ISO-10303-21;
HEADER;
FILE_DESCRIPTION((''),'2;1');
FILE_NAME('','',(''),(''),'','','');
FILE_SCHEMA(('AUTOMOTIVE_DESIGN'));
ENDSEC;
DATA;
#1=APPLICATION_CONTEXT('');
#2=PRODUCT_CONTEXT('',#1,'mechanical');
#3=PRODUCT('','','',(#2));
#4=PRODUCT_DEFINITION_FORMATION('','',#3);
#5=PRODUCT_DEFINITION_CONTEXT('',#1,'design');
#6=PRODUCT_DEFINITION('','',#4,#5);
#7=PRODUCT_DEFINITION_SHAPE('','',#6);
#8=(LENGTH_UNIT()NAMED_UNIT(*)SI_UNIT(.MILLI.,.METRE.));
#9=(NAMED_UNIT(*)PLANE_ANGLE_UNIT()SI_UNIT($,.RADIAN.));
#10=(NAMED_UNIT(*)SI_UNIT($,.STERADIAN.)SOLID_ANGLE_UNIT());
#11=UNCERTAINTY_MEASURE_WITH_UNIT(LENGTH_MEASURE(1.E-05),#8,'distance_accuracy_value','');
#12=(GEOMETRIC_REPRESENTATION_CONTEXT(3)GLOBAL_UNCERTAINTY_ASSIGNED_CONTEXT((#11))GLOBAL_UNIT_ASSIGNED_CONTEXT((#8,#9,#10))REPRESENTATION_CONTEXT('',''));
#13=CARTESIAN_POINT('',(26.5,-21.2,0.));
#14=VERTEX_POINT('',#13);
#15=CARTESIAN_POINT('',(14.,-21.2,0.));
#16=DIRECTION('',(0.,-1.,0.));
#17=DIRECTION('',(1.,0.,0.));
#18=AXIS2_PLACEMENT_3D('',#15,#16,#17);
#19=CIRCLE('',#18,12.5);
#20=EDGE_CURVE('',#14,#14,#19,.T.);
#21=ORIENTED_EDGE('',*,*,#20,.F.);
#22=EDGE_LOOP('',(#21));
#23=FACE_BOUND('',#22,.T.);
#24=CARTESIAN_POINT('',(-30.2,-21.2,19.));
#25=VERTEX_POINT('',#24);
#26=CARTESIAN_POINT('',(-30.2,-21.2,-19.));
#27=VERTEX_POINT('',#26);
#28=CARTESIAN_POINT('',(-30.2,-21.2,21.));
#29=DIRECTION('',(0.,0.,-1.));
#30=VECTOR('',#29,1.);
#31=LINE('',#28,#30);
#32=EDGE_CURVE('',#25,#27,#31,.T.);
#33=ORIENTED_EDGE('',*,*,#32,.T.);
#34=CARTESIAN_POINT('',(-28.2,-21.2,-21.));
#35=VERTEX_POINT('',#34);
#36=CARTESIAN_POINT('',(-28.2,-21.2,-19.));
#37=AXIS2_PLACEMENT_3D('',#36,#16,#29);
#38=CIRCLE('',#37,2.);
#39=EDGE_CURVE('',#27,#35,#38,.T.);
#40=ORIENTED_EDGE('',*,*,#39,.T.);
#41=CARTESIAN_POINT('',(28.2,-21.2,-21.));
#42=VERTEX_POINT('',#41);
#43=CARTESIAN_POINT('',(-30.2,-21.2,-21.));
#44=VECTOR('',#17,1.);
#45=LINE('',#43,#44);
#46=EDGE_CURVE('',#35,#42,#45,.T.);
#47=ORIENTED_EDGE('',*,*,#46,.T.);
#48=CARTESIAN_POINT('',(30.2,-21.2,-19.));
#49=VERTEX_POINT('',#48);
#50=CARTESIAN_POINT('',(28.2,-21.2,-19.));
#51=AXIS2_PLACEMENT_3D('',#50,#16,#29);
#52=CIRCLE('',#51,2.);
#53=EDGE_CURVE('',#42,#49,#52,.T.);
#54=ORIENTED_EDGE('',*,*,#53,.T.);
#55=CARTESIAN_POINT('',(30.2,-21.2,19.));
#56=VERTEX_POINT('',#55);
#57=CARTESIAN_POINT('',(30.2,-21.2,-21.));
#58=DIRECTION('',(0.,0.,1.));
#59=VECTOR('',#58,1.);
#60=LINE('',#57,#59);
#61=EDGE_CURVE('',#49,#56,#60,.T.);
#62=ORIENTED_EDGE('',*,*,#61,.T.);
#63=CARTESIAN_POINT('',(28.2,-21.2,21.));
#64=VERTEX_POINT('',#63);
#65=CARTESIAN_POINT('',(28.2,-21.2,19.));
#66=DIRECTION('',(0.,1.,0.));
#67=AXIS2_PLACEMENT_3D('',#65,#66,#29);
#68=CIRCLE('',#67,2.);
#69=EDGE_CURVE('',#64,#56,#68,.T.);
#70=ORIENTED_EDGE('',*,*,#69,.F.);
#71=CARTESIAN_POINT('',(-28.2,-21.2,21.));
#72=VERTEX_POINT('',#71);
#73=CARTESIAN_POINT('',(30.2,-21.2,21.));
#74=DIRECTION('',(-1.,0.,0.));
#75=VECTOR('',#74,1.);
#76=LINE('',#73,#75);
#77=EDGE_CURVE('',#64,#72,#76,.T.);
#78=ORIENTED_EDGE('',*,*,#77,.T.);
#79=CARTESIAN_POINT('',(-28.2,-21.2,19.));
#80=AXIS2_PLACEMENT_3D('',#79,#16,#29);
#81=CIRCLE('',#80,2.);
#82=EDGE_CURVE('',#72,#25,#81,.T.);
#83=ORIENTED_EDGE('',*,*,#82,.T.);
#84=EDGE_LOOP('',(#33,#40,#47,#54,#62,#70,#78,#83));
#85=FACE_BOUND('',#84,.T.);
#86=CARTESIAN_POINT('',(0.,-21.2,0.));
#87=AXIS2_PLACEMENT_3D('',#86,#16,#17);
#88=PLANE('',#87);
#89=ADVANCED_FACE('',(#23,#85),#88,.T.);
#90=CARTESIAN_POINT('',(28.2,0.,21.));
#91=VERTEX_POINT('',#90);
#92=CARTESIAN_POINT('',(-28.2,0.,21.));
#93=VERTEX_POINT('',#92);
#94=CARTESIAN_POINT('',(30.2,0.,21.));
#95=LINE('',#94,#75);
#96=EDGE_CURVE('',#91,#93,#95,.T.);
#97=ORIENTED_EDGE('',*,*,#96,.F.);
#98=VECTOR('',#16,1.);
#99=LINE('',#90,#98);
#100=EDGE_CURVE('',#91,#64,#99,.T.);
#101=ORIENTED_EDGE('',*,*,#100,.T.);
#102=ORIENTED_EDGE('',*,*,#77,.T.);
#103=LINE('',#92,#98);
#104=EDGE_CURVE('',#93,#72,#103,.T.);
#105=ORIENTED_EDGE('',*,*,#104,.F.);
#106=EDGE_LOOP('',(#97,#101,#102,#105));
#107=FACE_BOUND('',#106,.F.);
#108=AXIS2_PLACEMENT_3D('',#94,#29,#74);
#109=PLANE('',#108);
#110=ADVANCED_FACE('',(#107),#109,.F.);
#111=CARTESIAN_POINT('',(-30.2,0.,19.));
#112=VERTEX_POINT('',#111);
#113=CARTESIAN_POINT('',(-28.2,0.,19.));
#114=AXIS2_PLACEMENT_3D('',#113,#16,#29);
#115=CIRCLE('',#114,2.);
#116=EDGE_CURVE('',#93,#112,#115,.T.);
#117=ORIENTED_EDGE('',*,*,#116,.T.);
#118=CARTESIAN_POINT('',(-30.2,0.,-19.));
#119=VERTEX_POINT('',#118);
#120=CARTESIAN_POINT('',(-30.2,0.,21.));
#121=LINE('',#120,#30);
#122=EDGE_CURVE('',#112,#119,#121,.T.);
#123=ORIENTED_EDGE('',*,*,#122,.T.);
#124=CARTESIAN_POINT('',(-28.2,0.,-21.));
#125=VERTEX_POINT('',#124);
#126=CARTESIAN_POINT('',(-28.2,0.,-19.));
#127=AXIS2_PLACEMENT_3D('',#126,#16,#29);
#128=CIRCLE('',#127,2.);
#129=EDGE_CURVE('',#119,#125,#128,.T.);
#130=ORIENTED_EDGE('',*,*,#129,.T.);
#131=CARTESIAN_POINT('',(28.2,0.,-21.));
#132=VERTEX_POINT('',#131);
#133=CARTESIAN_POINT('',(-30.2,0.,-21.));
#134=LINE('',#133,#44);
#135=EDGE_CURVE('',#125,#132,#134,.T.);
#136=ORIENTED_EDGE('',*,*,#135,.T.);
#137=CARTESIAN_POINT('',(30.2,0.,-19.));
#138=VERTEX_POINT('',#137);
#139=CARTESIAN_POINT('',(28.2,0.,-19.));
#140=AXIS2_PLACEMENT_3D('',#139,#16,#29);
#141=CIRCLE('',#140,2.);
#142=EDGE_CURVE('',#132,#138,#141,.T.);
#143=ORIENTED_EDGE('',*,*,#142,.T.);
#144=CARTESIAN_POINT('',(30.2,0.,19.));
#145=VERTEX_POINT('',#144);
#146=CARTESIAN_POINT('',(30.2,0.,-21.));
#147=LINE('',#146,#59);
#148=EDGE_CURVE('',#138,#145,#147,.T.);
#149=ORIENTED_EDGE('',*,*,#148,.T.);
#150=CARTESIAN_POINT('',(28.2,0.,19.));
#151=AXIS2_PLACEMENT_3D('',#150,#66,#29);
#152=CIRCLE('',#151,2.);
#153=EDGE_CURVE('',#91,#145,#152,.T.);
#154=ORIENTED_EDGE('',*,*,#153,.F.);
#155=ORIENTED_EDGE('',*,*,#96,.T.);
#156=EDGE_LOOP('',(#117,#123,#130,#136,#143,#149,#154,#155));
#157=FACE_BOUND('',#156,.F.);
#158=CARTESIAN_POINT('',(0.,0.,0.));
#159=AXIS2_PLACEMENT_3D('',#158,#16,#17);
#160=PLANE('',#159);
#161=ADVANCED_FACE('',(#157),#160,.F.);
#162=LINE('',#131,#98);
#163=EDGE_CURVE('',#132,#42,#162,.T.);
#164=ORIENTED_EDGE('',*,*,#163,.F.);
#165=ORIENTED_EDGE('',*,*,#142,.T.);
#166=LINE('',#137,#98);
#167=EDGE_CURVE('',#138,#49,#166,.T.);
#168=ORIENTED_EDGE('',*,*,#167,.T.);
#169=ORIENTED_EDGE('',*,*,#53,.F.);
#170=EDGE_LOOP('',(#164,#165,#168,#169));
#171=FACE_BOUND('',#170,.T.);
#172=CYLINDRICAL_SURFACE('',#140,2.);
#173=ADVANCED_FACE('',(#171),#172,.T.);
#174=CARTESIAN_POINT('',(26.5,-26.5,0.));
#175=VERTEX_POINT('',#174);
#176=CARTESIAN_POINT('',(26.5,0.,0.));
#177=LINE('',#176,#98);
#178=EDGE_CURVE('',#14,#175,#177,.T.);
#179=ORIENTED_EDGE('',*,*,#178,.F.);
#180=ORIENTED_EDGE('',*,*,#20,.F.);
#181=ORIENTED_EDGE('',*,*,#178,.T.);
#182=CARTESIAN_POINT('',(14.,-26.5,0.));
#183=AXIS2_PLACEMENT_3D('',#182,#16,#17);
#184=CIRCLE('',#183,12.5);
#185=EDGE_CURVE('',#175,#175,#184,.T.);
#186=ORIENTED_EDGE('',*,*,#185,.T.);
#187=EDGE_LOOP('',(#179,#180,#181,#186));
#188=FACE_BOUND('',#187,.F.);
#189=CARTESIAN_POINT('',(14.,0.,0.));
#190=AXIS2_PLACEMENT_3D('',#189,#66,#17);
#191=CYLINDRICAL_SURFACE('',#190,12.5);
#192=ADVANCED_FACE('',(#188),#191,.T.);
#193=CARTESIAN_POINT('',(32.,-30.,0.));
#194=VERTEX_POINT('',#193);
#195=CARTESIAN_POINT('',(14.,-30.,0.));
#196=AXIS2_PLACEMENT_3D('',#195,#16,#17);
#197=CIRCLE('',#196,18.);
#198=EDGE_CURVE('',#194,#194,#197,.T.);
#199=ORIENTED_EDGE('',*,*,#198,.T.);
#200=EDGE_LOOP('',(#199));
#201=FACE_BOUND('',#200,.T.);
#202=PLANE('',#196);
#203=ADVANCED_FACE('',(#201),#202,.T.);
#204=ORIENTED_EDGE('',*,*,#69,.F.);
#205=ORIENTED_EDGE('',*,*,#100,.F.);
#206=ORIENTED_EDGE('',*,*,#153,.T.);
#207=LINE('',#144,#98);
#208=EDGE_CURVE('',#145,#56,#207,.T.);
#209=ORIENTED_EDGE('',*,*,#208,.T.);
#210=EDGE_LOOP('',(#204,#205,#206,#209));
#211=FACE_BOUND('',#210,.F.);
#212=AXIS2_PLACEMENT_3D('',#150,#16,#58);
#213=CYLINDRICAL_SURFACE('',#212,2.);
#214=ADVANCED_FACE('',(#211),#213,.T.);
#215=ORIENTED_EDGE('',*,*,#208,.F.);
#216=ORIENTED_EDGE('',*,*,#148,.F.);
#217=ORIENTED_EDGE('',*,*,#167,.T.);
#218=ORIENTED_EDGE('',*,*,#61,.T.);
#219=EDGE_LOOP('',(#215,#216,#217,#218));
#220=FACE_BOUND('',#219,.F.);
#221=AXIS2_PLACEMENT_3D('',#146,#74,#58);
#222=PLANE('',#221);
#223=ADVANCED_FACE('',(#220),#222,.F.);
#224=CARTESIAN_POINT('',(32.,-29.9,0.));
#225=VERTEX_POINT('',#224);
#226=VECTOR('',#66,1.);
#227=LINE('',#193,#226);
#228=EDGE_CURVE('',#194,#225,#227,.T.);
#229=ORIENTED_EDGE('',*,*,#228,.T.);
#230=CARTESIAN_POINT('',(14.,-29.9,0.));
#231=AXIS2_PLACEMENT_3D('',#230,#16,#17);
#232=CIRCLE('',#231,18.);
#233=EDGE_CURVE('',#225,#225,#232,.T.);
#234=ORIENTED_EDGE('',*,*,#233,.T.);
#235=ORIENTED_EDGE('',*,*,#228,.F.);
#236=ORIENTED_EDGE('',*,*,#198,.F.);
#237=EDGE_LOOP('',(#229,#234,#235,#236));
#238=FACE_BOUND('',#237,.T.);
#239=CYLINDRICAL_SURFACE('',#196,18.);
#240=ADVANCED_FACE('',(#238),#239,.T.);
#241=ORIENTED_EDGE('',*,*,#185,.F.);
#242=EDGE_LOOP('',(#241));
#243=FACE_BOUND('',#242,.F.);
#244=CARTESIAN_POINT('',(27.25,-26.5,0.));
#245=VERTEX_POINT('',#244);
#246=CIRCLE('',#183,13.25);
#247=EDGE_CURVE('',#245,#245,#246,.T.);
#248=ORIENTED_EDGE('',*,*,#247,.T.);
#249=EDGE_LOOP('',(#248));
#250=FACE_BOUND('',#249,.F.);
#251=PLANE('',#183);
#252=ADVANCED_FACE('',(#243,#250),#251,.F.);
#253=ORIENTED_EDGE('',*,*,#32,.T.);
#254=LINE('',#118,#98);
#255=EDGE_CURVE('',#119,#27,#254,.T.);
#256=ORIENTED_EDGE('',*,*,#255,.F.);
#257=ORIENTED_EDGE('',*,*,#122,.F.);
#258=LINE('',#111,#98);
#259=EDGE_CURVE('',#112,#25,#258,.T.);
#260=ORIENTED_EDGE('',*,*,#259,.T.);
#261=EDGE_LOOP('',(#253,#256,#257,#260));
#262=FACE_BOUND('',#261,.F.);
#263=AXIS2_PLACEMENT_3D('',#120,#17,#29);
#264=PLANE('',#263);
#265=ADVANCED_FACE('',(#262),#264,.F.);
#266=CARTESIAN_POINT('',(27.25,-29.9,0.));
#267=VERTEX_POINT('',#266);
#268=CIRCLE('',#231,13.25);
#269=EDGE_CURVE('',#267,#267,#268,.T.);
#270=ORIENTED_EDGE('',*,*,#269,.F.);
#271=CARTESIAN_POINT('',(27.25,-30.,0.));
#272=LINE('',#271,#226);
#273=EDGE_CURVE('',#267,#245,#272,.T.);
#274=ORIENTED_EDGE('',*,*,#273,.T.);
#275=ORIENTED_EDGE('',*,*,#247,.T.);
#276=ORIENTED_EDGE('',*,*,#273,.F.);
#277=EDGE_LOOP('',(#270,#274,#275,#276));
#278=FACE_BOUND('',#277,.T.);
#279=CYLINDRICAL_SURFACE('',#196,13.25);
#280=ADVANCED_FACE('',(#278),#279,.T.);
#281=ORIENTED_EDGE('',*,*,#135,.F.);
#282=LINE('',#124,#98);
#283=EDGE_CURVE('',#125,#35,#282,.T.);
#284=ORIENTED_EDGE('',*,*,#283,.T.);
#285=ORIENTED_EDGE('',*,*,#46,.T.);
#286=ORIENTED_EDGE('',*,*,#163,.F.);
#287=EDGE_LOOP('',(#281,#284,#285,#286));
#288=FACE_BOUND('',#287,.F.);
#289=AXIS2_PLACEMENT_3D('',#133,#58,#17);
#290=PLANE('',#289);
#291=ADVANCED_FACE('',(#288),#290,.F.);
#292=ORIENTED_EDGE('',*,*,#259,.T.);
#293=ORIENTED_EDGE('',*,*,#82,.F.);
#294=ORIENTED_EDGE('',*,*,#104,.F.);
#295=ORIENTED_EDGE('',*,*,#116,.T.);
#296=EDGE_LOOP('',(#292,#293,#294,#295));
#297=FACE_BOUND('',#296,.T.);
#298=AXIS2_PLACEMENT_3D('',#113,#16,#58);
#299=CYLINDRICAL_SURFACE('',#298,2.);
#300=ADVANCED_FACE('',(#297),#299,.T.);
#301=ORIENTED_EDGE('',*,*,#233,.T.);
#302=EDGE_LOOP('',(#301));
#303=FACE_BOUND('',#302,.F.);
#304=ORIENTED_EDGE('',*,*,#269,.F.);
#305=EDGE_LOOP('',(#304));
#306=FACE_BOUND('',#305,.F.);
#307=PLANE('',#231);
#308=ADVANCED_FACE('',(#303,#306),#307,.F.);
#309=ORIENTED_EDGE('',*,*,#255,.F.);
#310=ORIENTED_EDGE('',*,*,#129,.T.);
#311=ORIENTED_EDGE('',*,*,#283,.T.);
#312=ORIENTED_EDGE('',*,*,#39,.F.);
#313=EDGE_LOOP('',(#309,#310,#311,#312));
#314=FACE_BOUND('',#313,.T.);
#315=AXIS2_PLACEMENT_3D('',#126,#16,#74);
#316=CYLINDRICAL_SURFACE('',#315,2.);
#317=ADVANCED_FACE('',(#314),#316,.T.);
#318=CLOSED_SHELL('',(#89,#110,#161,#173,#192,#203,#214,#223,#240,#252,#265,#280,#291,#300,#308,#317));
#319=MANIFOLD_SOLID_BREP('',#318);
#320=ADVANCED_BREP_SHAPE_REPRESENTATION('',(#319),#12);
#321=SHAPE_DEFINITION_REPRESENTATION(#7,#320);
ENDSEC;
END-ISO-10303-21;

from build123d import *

# Parameters (mm, degrees)
F0_R      = 12.5
F1_DEPTH  = 30
F2_DEPTH  = 21.2
F3_R      = 2
F4_R      = 2
F5_R      = 2
F6_R      = 2
F7_R      = 13.25
F7_R_2    = 12.5
F8_DEPTH  = 3.5
F7_R_3    = 18
F7_R_4    = 17.5
F10_DEPTH = 0.1


# Not quite as in the source:
# - the program builds the solid bodies; features that only make, move or delete a surface that nothing else refers to are left out


with BuildPart() as f1:
    # F0 (on Front) → F1 (new body)
    with BuildSketch(Plane.XZ):
        with Locations((14, 0)):
            Circle(F0_R)
    extrude(amount=F1_DEPTH)

    # F0 (on Front) → F2 (join)
    with BuildSketch(Plane.XZ):
        Polygon((30.2, -21), (30.2, 0), (30.2, 21), (-30.2, 21), (-30.2, -21), align=None)
        with Locations((14, 0)):
            Circle(F0_R, mode=Mode.SUBTRACT)
    extrude(amount=F2_DEPTH)

    # F3
    f3_edges = [f1.edges().sort_by_distance(p)[0] for p in [
        (-30.2, -10.6, 21),
    ]]
    fillet(f3_edges, radius=F3_R)

    # F4
    f4_edges = [f1.edges().sort_by_distance(p)[0] for p in [
        (30.2, -10.6, 21),
    ]]
    fillet(f4_edges, radius=F4_R)

    # F5
    f5_edges = [f1.edges().sort_by_distance(p)[0] for p in [
        (-30.2, -10.6, -21),
    ]]
    fillet(f5_edges, radius=F5_R)

    # F6
    f6_edges = [f1.edges().sort_by_distance(p)[0] for p in [
        (30.2, -10.6, -21),
    ]]
    fillet(f6_edges, radius=F6_R)

    # F7 (on face) → F8 (join)
    with BuildSketch(Plane.XZ.offset(30)):
        with Locations((14, 0)):
            Circle(F7_R)
        with Locations((14, 0)):
            Circle(F7_R_2, mode=Mode.SUBTRACT)
    extrude(amount=-F8_DEPTH)

    # F7 (on face) → F10 (join)
    with BuildSketch(Plane.XZ.offset(30)):
        with Locations((14, 0)):
            Circle(F7_R_3)
        with Locations((14, 0)):
            Circle(F7_R_4, mode=Mode.SUBTRACT)
        with Locations((14, 0)):
            Circle(F7_R_4)
        with Locations((14, 0)):
            Circle(F7_R, mode=Mode.SUBTRACT)
    extrude(amount=-F10_DEPTH)


solid = f1.part
